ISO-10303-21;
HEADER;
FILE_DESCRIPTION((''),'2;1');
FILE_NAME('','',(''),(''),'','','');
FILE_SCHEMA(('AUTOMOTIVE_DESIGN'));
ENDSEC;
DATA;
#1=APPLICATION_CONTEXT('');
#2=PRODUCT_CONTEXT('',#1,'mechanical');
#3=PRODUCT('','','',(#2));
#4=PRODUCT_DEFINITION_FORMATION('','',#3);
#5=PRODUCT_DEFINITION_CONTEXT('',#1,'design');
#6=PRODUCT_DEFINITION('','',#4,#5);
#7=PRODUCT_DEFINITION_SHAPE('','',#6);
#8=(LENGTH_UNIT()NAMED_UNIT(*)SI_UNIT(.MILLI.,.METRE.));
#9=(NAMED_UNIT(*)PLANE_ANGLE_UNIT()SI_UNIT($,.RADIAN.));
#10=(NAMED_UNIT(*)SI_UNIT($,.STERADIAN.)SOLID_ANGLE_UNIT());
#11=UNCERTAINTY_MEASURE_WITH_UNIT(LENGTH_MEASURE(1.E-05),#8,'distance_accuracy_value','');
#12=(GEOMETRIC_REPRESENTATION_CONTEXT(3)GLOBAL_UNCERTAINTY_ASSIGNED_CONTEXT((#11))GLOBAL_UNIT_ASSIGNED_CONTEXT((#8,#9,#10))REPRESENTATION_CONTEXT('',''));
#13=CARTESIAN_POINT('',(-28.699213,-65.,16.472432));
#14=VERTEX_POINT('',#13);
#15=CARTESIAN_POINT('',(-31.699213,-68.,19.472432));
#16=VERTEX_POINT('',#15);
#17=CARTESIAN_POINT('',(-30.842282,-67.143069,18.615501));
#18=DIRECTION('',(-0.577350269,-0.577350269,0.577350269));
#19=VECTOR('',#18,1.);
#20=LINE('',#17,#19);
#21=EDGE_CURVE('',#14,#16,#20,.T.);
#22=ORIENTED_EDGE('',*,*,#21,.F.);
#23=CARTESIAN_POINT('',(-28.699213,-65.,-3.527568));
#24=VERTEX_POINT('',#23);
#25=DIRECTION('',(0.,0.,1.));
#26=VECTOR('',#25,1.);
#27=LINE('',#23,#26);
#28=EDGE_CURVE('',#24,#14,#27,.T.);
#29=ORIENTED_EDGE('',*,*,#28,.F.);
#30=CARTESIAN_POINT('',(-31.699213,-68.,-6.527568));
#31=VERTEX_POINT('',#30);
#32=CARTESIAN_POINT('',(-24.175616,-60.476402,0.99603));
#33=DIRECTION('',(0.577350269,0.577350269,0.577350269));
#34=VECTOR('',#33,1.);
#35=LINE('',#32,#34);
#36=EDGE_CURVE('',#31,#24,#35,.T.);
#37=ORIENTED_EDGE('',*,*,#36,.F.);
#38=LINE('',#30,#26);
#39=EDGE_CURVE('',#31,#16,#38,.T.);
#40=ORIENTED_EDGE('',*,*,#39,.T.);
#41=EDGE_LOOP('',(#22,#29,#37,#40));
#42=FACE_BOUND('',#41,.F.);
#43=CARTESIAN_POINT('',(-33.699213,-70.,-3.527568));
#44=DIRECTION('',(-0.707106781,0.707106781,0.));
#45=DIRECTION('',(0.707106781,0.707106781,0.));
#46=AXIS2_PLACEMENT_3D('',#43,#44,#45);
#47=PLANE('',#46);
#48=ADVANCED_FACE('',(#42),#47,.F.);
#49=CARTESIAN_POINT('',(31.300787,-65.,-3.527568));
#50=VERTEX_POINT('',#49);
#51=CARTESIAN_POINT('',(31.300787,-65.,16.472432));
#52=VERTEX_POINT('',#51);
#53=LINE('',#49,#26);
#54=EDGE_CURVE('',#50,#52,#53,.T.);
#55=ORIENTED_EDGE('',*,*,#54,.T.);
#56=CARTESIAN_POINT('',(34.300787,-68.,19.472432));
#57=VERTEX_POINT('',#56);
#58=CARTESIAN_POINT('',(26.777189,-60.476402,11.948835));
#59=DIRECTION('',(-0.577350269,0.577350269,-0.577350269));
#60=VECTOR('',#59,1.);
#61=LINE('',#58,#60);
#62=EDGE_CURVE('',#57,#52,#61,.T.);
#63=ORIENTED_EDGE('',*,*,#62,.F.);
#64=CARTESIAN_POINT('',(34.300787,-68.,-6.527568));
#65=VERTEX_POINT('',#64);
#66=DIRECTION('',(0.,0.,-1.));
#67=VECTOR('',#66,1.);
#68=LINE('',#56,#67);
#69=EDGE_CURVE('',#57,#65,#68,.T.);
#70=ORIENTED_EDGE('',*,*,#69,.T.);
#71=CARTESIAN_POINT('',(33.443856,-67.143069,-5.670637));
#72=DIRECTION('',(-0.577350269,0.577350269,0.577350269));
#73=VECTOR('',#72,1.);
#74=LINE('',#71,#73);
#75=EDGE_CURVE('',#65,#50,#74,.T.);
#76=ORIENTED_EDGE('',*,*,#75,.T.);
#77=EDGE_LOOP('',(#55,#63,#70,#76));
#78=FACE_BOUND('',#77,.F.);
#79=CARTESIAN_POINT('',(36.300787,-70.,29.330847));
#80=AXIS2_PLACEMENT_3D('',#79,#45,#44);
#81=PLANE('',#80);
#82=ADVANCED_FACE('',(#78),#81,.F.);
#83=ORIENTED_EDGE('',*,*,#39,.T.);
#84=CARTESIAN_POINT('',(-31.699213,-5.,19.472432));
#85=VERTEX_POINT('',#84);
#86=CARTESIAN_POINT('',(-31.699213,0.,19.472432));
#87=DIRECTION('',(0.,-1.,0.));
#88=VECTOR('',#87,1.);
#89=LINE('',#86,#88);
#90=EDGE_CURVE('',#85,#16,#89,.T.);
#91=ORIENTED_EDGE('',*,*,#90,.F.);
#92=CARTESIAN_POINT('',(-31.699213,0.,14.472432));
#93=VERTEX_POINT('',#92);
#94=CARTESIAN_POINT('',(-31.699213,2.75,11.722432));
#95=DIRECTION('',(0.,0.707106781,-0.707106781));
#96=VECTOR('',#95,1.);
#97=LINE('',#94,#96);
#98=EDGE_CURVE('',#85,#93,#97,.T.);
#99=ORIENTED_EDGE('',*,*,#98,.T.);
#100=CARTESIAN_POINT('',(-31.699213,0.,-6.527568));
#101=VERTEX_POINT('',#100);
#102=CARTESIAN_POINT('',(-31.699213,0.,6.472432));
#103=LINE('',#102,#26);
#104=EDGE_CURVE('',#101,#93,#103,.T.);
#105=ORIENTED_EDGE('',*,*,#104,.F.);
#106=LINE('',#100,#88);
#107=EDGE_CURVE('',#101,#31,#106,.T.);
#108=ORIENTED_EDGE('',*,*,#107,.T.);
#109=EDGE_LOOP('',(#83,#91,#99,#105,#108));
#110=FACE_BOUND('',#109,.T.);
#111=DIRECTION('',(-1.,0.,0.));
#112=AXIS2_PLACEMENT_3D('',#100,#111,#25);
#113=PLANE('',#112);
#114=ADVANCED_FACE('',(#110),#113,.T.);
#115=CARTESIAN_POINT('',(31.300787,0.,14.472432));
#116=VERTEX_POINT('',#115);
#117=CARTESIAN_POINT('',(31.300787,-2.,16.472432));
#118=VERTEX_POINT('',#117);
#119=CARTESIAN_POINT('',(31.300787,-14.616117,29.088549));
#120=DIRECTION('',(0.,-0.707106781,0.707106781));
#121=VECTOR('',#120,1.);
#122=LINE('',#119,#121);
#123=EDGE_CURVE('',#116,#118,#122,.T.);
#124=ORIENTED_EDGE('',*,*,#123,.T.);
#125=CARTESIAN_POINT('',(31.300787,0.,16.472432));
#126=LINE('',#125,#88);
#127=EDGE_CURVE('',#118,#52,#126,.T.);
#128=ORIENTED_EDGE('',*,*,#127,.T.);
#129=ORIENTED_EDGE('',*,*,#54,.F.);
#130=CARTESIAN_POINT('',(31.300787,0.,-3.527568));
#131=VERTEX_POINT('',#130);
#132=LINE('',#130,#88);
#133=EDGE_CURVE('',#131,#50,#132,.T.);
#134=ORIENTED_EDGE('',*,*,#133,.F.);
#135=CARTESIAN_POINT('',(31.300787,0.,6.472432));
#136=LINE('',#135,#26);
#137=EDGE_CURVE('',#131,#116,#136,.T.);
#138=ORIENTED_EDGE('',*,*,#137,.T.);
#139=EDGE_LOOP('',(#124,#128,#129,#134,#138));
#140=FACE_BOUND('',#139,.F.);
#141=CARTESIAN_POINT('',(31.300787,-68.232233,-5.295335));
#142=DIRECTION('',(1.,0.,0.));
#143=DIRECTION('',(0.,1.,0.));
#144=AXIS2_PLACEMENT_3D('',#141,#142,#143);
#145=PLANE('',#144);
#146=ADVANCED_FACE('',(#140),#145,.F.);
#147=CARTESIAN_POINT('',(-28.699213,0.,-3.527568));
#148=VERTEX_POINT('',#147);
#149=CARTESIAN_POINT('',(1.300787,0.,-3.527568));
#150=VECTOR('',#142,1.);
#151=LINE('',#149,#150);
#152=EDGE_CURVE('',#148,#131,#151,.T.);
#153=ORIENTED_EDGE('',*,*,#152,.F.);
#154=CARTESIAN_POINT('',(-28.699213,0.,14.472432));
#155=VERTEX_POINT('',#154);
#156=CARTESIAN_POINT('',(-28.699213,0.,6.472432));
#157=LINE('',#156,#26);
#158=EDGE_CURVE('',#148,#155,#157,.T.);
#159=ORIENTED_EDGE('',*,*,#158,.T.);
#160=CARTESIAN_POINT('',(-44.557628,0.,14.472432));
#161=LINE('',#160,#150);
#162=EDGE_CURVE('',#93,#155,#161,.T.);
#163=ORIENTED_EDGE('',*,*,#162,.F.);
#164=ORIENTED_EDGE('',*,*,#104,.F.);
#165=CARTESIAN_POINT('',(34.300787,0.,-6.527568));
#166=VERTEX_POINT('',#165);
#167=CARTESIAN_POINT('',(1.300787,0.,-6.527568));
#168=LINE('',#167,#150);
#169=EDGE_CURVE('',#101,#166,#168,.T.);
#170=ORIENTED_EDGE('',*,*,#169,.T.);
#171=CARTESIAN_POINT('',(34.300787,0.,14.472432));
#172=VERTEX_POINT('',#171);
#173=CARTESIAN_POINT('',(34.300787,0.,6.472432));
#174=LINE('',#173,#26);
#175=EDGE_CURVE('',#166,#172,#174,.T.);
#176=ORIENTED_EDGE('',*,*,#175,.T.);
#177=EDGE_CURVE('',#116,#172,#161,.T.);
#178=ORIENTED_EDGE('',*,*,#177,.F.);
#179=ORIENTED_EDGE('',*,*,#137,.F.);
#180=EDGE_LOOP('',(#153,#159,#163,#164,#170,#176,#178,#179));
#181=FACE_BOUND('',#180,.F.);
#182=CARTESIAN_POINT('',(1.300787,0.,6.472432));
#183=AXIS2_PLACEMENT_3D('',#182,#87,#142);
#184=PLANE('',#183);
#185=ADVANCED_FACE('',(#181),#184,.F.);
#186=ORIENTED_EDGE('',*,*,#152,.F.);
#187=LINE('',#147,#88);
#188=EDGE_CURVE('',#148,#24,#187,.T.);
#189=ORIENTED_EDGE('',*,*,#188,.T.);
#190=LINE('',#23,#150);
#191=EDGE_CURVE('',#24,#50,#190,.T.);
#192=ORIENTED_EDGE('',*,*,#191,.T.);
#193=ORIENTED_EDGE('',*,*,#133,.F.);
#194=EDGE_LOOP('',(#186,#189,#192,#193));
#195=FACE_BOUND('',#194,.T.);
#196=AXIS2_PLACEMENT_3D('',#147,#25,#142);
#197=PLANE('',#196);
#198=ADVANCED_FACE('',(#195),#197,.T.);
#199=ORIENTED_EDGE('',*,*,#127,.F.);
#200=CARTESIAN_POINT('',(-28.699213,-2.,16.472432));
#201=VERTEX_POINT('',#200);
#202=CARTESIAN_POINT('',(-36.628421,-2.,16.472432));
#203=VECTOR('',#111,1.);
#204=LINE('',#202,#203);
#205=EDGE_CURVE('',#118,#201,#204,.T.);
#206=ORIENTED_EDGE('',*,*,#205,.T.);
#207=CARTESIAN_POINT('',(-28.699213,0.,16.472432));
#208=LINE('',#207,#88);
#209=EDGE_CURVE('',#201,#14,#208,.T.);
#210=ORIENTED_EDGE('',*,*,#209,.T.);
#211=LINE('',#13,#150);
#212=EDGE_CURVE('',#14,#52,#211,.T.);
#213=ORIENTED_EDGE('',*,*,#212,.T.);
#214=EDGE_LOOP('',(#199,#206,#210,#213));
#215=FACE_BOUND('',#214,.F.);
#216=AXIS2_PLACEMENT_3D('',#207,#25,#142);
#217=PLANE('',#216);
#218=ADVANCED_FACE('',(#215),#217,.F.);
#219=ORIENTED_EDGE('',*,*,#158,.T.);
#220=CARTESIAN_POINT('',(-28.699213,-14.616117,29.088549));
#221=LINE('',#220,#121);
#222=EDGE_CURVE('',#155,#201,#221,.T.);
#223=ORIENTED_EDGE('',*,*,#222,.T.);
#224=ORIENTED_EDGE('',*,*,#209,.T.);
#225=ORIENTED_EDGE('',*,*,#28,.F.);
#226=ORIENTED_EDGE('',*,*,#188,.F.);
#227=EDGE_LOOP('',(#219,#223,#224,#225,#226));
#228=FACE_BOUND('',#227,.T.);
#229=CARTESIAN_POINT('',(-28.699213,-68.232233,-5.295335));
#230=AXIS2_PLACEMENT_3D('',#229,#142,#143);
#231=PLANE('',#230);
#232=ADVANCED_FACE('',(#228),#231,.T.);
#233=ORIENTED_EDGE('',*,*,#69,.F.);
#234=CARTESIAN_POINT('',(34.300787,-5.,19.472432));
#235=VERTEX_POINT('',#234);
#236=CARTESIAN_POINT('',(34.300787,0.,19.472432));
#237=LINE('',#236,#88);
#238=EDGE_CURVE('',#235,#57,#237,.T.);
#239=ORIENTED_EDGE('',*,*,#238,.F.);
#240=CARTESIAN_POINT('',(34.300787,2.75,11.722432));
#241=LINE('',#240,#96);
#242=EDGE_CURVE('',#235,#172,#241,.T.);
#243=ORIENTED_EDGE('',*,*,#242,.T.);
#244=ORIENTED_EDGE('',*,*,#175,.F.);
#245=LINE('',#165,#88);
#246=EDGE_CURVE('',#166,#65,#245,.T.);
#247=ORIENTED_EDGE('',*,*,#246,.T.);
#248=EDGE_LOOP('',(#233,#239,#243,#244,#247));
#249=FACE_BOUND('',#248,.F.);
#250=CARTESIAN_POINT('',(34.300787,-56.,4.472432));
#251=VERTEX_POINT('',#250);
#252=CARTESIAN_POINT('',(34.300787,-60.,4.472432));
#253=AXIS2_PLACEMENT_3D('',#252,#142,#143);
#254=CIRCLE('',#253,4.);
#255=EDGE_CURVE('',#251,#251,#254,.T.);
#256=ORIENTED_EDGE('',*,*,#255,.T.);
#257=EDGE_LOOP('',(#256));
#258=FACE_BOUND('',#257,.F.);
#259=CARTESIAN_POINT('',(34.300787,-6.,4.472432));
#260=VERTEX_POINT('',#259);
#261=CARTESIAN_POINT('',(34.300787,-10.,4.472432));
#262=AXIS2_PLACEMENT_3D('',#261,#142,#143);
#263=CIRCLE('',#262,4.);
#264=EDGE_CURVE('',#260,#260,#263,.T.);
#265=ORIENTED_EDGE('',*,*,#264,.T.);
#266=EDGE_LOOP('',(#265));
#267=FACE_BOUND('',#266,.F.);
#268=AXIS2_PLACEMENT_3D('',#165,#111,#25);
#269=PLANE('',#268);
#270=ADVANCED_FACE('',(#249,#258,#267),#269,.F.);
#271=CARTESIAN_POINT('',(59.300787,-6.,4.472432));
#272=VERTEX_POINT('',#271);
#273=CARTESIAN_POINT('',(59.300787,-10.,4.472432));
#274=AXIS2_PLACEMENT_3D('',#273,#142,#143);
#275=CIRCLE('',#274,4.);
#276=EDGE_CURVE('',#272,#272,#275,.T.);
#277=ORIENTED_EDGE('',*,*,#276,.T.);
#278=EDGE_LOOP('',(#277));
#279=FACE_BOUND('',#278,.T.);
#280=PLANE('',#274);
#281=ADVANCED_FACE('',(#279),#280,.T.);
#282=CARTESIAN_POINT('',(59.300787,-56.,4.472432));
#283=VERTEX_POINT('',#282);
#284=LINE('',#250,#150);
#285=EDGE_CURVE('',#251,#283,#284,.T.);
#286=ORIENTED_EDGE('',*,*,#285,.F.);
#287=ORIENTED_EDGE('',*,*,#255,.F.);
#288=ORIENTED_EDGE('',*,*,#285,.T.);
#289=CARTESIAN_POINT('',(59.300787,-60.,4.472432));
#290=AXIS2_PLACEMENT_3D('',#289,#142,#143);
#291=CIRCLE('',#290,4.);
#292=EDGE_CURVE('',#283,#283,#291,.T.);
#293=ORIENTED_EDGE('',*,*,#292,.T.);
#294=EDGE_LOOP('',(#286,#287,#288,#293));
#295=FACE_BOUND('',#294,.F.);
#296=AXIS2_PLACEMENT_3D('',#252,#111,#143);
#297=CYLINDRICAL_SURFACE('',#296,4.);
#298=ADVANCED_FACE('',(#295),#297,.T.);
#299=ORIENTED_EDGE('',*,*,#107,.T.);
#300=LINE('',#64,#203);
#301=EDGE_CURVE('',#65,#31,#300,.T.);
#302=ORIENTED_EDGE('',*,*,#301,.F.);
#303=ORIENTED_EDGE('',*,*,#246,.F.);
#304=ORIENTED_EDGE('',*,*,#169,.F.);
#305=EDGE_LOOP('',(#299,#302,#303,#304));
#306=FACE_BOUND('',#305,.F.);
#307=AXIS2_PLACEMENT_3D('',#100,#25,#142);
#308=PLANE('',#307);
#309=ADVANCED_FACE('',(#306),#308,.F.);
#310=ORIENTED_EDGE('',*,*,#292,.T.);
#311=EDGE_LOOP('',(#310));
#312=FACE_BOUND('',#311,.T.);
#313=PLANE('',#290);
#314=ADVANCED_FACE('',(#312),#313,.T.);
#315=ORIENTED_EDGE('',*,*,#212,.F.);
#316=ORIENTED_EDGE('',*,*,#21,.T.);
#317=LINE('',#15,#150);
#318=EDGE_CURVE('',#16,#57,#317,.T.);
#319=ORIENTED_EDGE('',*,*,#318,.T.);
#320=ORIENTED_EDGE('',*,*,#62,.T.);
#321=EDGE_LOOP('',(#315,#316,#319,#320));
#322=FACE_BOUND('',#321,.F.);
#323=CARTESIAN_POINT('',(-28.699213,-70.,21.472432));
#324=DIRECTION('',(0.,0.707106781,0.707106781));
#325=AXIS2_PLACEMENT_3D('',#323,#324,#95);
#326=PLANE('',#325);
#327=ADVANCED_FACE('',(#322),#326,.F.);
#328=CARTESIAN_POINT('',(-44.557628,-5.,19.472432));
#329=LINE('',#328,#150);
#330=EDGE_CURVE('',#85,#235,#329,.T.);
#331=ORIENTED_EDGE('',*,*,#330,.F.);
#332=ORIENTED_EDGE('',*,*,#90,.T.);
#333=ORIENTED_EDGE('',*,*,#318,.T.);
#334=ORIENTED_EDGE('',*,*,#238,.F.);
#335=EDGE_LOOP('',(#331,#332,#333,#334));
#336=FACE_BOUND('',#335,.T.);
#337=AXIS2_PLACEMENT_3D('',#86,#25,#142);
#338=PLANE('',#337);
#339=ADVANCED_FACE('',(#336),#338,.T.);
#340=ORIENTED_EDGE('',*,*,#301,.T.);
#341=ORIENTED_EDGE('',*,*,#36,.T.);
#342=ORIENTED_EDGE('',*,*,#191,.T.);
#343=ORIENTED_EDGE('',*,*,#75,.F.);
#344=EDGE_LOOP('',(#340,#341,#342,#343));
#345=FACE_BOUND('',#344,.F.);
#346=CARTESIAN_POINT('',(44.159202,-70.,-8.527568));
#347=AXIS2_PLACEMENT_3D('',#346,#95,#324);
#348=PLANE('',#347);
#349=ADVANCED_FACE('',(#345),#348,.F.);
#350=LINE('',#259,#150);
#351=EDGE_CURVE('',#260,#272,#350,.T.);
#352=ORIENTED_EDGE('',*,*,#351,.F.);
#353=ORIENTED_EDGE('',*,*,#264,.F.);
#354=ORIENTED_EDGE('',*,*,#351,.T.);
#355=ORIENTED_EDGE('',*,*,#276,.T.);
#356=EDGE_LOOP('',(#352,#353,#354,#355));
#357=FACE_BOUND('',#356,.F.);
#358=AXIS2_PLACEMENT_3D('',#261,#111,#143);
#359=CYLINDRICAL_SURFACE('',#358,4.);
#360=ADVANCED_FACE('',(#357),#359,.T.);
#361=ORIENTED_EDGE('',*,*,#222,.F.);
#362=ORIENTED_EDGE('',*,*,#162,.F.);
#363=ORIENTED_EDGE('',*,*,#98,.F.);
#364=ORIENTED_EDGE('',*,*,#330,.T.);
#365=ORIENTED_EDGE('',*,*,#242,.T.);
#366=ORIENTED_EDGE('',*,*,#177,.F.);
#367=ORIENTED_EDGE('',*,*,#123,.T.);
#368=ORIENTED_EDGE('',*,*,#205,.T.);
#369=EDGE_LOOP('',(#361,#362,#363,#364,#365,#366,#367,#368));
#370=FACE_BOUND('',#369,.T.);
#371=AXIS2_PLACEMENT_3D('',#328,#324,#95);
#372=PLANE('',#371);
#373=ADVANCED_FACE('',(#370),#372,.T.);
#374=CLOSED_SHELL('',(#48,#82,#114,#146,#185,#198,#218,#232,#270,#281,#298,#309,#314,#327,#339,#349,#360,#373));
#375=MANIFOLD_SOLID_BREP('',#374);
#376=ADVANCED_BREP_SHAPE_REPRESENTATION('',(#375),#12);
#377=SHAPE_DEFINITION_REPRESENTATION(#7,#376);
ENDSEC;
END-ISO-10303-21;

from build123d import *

# Parameters (mm, degrees)
F0_W         = 66
F0_H         = 26
F0_W_2       = 60
F0_H_2       = 20
F1_DEPTH     = 70
F2_R         = 4
F3_DEPTH     = 25
F4_T1_DEPTH  = 60
F4_T3_DEPTH  = 20
F4_T9_DEPTH  = 72.8584149398
F4_T15_DEPTH = 32.8584149398
F4_T24_DEPTH = 72.8584149398
F4_T30_DEPTH = 32.8584149398
F4_T39_DEPTH = 72.8584149398
F4_T45_DEPTH = 32.8584149398
F4_T54_DEPTH = 32.8584149398
F4_T60_DEPTH = 72.8584149398
F5_T1_DEPTH  = 91.7168298797


# Not quite as in the source:
# - a fillet or chamfer that OpenCascade refuses, or shapes differently, is made with other operations: its cross-section is extruded or revolved along the edge and cut away or added


with BuildPart() as f1:
    # F0 (on Front) → F1 (new body)
    with BuildSketch(Plane.XZ):
        with Locations((1.3007868016, 6.4724322181)):
            Rectangle(F0_W, F0_H)
        with Locations((1.3007868016, 6.4724322181)):
            Rectangle(F0_W_2, F0_H_2, mode=Mode.SUBTRACT)
    extrude(amount=F1_DEPTH)

    # F2 (on face) → F3 (join)
    with BuildSketch(Plane.YZ.offset(34.3007868016)):
        with Locations((-60, 4.4724322181)):
            Circle(F2_R)
        with Locations((-10, 4.4724322181)):
            Circle(F2_R)
    extrude(amount=F3_DEPTH)

    # F4: chamfer of 5 on 4 edges, made by hand

    # F4_s2 → F4_t1 (cut)
    with BuildSketch(Plane.YZ.offset(-28.6992131984)):
        Polygon((-70, 21.4724322181), (-65, 16.4724322181), (-70, 16.4724322181), align=None)
        Polygon((-70, -8.5275677819), (-65, -3.5275677819), (-70, -3.5275677819), align=None)
    extrude(amount=F4_T1_DEPTH, mode=Mode.SUBTRACT)

    # F4_s4 → F4_t3 (cut)
    with BuildSketch(Plane.XY.offset(-3.5275677819)):
        Polygon((-33.6992131984, -70), (-28.6992131984, -65), (-28.6992131984, -70), align=None)
        Polygon((36.3007868016, -70), (31.3007868016, -65), (31.3007868016, -70), align=None)
    extrude(amount=F4_T3_DEPTH, mode=Mode.SUBTRACT)


with BuildPart() as f4_tool7:
    # F4_s8 → F4_t9 (new body)
    with BuildSketch(Plane.YZ.offset(-41.5576281383)):
        Polygon((-70, 21.4724322181), (-65, 16.4724322181), (-70, 16.4724322181), align=None)
    extrude(amount=F4_T9_DEPTH)

    split(bisect_by=Plane.YZ.offset(-31.6992131984), keep=Keep.TOP)

    split(bisect_by=Plane.XY.offset(19.4724322181), keep=Keep.BOTTOM)

    split(bisect_by=Plane.YZ.offset(-28.6992131984), keep=Keep.BOTTOM)


with BuildPart() as f4_tool13:
    # F4_s14 → F4_t15 (new body)
    with BuildSketch(Plane.XY.offset(-3.5275677819)):
        Polygon((-33.6992131984, -70), (-28.6992131984, -65), (-28.6992131984, -70), align=None)
    extrude(amount=F4_T15_DEPTH)

    split(bisect_by=Plane.YZ.offset(-31.6992131984), keep=Keep.TOP)

    split(bisect_by=Plane.XY.offset(19.4724322181), keep=Keep.BOTTOM)

    split(bisect_by=Plane.XY.offset(16.4724322181), keep=Keep.TOP)


with BuildPart() as f4_tool7_1:
    add(f4_tool7.part)

    # F4_t19: intersect F4_tool13
    add(f4_tool13.part, mode=Mode.INTERSECT)


with BuildPart() as f1_1:
    add(f1.part)

    # F4_t5: cut F4_tool7
    add(f4_tool7_1.part, mode=Mode.SUBTRACT)


with BuildPart() as f4_tool22:
    # F4_s23 → F4_t24 (new body)
    with BuildSketch(Plane.YZ.offset(-28.6992131984)):
        Polygon((-70, 21.4724322181), (-65, 16.4724322181), (-70, 16.4724322181), align=None)
    extrude(amount=F4_T24_DEPTH)

    split(bisect_by=Plane.YZ.offset(34.3007868016), keep=Keep.BOTTOM)

    split(bisect_by=Plane.XY.offset(19.4724322181), keep=Keep.BOTTOM)

    split(bisect_by=Plane.YZ.offset(31.3007868016), keep=Keep.TOP)


with BuildPart() as f4_tool28:
    # F4_s29 → F4_t30 (new body)
    with BuildSketch(Plane.XY.offset(29.3308471579)):
        Polygon((36.3007868016, -70), (31.3007868016, -65), (31.3007868016, -70), align=None)
    extrude(amount=-F4_T30_DEPTH)

    split(bisect_by=Plane.YZ.offset(34.3007868016), keep=Keep.BOTTOM)

    split(bisect_by=Plane.XY.offset(19.4724322181), keep=Keep.BOTTOM)

    split(bisect_by=Plane.XY.offset(16.4724322181), keep=Keep.TOP)


with BuildPart() as f4_tool22_1:
    add(f4_tool22.part)

    # F4_t34: intersect F4_tool28
    add(f4_tool28.part, mode=Mode.INTERSECT)


with BuildPart() as f1_2:
    add(f1_1.part)

    # F4_t20: cut F4_tool22
    add(f4_tool22_1.part, mode=Mode.SUBTRACT)


with BuildPart() as f4_tool37:
    # F4_s38 → F4_t39 (new body)
    with BuildSketch(Plane.YZ.offset(31.3007868016)):
        Polygon((-70, -8.5275677819), (-65, -3.5275677819), (-70, -3.5275677819), align=None)
    extrude(amount=-F4_T39_DEPTH)

    split(bisect_by=Plane.XY.offset(-6.5275677819), keep=Keep.TOP)

    split(bisect_by=Plane.YZ.offset(-31.6992131984), keep=Keep.TOP)

    split(bisect_by=Plane.YZ.offset(-28.6992131984), keep=Keep.BOTTOM)


with BuildPart() as f4_tool43:
    # F4_s44 → F4_t45 (new body)
    with BuildSketch(Plane.XY.offset(-16.3859827218)):
        Polygon((-33.6992131984, -70), (-28.6992131984, -65), (-28.6992131984, -70), align=None)
    extrude(amount=F4_T45_DEPTH)

    split(bisect_by=Plane.XY.offset(-6.5275677819), keep=Keep.TOP)

    split(bisect_by=Plane.YZ.offset(-31.6992131984), keep=Keep.TOP)

    split(bisect_by=Plane.XY.offset(-3.5275677819), keep=Keep.BOTTOM)


with BuildPart() as f4_tool37_1:
    add(f4_tool37.part)

    # F4_t49: intersect F4_tool43
    add(f4_tool43.part, mode=Mode.INTERSECT)


with BuildPart() as f1_3:
    add(f1_2.part)

    # F4_t35: cut F4_tool37
    add(f4_tool37_1.part, mode=Mode.SUBTRACT)


with BuildPart() as f4_tool52:
    # F4_s53 → F4_t54 (new body)
    with BuildSketch(Plane.XY.offset(16.4724322181)):
        Polygon((36.3007868016, -70), (31.3007868016, -65), (31.3007868016, -70), align=None)
    extrude(amount=-F4_T54_DEPTH)

    split(bisect_by=Plane.XY.offset(-6.5275677819), keep=Keep.TOP)

    split(bisect_by=Plane.YZ.offset(34.3007868016), keep=Keep.BOTTOM)

    split(bisect_by=Plane.XY.offset(-3.5275677819), keep=Keep.BOTTOM)


with BuildPart() as f4_tool58:
    # F4_s59 → F4_t60 (new body)
    with BuildSketch(Plane.YZ.offset(44.1592017414)):
        Polygon((-70, -8.5275677819), (-65, -3.5275677819), (-70, -3.5275677819), align=None)
    extrude(amount=-F4_T60_DEPTH)

    split(bisect_by=Plane.XY.offset(-6.5275677819), keep=Keep.TOP)

    split(bisect_by=Plane.YZ.offset(34.3007868016), keep=Keep.BOTTOM)

    split(bisect_by=Plane.YZ.offset(31.3007868016), keep=Keep.TOP)


with BuildPart() as f4_tool52_1:
    add(f4_tool52.part)

    # F4_t64: intersect F4_tool58
    add(f4_tool58.part, mode=Mode.INTERSECT)


with BuildPart() as f1_4:
    add(f1_3.part)

    # F4_t50: cut F4_tool52
    add(f4_tool52_1.part, mode=Mode.SUBTRACT)

    # F5: chamfer of 5 on 1 edges, made by hand

    # F5_s2 → F5_t1 (cut)
    with BuildSketch(Plane.YZ.offset(-44.5576281383)):
        Polygon((-5, 19.4724322181), (0, 14.4724322181), (0, 19.4724322181), align=None)
    extrude(amount=F5_T1_DEPTH, mode=Mode.SUBTRACT)


solid = f1_4.part
